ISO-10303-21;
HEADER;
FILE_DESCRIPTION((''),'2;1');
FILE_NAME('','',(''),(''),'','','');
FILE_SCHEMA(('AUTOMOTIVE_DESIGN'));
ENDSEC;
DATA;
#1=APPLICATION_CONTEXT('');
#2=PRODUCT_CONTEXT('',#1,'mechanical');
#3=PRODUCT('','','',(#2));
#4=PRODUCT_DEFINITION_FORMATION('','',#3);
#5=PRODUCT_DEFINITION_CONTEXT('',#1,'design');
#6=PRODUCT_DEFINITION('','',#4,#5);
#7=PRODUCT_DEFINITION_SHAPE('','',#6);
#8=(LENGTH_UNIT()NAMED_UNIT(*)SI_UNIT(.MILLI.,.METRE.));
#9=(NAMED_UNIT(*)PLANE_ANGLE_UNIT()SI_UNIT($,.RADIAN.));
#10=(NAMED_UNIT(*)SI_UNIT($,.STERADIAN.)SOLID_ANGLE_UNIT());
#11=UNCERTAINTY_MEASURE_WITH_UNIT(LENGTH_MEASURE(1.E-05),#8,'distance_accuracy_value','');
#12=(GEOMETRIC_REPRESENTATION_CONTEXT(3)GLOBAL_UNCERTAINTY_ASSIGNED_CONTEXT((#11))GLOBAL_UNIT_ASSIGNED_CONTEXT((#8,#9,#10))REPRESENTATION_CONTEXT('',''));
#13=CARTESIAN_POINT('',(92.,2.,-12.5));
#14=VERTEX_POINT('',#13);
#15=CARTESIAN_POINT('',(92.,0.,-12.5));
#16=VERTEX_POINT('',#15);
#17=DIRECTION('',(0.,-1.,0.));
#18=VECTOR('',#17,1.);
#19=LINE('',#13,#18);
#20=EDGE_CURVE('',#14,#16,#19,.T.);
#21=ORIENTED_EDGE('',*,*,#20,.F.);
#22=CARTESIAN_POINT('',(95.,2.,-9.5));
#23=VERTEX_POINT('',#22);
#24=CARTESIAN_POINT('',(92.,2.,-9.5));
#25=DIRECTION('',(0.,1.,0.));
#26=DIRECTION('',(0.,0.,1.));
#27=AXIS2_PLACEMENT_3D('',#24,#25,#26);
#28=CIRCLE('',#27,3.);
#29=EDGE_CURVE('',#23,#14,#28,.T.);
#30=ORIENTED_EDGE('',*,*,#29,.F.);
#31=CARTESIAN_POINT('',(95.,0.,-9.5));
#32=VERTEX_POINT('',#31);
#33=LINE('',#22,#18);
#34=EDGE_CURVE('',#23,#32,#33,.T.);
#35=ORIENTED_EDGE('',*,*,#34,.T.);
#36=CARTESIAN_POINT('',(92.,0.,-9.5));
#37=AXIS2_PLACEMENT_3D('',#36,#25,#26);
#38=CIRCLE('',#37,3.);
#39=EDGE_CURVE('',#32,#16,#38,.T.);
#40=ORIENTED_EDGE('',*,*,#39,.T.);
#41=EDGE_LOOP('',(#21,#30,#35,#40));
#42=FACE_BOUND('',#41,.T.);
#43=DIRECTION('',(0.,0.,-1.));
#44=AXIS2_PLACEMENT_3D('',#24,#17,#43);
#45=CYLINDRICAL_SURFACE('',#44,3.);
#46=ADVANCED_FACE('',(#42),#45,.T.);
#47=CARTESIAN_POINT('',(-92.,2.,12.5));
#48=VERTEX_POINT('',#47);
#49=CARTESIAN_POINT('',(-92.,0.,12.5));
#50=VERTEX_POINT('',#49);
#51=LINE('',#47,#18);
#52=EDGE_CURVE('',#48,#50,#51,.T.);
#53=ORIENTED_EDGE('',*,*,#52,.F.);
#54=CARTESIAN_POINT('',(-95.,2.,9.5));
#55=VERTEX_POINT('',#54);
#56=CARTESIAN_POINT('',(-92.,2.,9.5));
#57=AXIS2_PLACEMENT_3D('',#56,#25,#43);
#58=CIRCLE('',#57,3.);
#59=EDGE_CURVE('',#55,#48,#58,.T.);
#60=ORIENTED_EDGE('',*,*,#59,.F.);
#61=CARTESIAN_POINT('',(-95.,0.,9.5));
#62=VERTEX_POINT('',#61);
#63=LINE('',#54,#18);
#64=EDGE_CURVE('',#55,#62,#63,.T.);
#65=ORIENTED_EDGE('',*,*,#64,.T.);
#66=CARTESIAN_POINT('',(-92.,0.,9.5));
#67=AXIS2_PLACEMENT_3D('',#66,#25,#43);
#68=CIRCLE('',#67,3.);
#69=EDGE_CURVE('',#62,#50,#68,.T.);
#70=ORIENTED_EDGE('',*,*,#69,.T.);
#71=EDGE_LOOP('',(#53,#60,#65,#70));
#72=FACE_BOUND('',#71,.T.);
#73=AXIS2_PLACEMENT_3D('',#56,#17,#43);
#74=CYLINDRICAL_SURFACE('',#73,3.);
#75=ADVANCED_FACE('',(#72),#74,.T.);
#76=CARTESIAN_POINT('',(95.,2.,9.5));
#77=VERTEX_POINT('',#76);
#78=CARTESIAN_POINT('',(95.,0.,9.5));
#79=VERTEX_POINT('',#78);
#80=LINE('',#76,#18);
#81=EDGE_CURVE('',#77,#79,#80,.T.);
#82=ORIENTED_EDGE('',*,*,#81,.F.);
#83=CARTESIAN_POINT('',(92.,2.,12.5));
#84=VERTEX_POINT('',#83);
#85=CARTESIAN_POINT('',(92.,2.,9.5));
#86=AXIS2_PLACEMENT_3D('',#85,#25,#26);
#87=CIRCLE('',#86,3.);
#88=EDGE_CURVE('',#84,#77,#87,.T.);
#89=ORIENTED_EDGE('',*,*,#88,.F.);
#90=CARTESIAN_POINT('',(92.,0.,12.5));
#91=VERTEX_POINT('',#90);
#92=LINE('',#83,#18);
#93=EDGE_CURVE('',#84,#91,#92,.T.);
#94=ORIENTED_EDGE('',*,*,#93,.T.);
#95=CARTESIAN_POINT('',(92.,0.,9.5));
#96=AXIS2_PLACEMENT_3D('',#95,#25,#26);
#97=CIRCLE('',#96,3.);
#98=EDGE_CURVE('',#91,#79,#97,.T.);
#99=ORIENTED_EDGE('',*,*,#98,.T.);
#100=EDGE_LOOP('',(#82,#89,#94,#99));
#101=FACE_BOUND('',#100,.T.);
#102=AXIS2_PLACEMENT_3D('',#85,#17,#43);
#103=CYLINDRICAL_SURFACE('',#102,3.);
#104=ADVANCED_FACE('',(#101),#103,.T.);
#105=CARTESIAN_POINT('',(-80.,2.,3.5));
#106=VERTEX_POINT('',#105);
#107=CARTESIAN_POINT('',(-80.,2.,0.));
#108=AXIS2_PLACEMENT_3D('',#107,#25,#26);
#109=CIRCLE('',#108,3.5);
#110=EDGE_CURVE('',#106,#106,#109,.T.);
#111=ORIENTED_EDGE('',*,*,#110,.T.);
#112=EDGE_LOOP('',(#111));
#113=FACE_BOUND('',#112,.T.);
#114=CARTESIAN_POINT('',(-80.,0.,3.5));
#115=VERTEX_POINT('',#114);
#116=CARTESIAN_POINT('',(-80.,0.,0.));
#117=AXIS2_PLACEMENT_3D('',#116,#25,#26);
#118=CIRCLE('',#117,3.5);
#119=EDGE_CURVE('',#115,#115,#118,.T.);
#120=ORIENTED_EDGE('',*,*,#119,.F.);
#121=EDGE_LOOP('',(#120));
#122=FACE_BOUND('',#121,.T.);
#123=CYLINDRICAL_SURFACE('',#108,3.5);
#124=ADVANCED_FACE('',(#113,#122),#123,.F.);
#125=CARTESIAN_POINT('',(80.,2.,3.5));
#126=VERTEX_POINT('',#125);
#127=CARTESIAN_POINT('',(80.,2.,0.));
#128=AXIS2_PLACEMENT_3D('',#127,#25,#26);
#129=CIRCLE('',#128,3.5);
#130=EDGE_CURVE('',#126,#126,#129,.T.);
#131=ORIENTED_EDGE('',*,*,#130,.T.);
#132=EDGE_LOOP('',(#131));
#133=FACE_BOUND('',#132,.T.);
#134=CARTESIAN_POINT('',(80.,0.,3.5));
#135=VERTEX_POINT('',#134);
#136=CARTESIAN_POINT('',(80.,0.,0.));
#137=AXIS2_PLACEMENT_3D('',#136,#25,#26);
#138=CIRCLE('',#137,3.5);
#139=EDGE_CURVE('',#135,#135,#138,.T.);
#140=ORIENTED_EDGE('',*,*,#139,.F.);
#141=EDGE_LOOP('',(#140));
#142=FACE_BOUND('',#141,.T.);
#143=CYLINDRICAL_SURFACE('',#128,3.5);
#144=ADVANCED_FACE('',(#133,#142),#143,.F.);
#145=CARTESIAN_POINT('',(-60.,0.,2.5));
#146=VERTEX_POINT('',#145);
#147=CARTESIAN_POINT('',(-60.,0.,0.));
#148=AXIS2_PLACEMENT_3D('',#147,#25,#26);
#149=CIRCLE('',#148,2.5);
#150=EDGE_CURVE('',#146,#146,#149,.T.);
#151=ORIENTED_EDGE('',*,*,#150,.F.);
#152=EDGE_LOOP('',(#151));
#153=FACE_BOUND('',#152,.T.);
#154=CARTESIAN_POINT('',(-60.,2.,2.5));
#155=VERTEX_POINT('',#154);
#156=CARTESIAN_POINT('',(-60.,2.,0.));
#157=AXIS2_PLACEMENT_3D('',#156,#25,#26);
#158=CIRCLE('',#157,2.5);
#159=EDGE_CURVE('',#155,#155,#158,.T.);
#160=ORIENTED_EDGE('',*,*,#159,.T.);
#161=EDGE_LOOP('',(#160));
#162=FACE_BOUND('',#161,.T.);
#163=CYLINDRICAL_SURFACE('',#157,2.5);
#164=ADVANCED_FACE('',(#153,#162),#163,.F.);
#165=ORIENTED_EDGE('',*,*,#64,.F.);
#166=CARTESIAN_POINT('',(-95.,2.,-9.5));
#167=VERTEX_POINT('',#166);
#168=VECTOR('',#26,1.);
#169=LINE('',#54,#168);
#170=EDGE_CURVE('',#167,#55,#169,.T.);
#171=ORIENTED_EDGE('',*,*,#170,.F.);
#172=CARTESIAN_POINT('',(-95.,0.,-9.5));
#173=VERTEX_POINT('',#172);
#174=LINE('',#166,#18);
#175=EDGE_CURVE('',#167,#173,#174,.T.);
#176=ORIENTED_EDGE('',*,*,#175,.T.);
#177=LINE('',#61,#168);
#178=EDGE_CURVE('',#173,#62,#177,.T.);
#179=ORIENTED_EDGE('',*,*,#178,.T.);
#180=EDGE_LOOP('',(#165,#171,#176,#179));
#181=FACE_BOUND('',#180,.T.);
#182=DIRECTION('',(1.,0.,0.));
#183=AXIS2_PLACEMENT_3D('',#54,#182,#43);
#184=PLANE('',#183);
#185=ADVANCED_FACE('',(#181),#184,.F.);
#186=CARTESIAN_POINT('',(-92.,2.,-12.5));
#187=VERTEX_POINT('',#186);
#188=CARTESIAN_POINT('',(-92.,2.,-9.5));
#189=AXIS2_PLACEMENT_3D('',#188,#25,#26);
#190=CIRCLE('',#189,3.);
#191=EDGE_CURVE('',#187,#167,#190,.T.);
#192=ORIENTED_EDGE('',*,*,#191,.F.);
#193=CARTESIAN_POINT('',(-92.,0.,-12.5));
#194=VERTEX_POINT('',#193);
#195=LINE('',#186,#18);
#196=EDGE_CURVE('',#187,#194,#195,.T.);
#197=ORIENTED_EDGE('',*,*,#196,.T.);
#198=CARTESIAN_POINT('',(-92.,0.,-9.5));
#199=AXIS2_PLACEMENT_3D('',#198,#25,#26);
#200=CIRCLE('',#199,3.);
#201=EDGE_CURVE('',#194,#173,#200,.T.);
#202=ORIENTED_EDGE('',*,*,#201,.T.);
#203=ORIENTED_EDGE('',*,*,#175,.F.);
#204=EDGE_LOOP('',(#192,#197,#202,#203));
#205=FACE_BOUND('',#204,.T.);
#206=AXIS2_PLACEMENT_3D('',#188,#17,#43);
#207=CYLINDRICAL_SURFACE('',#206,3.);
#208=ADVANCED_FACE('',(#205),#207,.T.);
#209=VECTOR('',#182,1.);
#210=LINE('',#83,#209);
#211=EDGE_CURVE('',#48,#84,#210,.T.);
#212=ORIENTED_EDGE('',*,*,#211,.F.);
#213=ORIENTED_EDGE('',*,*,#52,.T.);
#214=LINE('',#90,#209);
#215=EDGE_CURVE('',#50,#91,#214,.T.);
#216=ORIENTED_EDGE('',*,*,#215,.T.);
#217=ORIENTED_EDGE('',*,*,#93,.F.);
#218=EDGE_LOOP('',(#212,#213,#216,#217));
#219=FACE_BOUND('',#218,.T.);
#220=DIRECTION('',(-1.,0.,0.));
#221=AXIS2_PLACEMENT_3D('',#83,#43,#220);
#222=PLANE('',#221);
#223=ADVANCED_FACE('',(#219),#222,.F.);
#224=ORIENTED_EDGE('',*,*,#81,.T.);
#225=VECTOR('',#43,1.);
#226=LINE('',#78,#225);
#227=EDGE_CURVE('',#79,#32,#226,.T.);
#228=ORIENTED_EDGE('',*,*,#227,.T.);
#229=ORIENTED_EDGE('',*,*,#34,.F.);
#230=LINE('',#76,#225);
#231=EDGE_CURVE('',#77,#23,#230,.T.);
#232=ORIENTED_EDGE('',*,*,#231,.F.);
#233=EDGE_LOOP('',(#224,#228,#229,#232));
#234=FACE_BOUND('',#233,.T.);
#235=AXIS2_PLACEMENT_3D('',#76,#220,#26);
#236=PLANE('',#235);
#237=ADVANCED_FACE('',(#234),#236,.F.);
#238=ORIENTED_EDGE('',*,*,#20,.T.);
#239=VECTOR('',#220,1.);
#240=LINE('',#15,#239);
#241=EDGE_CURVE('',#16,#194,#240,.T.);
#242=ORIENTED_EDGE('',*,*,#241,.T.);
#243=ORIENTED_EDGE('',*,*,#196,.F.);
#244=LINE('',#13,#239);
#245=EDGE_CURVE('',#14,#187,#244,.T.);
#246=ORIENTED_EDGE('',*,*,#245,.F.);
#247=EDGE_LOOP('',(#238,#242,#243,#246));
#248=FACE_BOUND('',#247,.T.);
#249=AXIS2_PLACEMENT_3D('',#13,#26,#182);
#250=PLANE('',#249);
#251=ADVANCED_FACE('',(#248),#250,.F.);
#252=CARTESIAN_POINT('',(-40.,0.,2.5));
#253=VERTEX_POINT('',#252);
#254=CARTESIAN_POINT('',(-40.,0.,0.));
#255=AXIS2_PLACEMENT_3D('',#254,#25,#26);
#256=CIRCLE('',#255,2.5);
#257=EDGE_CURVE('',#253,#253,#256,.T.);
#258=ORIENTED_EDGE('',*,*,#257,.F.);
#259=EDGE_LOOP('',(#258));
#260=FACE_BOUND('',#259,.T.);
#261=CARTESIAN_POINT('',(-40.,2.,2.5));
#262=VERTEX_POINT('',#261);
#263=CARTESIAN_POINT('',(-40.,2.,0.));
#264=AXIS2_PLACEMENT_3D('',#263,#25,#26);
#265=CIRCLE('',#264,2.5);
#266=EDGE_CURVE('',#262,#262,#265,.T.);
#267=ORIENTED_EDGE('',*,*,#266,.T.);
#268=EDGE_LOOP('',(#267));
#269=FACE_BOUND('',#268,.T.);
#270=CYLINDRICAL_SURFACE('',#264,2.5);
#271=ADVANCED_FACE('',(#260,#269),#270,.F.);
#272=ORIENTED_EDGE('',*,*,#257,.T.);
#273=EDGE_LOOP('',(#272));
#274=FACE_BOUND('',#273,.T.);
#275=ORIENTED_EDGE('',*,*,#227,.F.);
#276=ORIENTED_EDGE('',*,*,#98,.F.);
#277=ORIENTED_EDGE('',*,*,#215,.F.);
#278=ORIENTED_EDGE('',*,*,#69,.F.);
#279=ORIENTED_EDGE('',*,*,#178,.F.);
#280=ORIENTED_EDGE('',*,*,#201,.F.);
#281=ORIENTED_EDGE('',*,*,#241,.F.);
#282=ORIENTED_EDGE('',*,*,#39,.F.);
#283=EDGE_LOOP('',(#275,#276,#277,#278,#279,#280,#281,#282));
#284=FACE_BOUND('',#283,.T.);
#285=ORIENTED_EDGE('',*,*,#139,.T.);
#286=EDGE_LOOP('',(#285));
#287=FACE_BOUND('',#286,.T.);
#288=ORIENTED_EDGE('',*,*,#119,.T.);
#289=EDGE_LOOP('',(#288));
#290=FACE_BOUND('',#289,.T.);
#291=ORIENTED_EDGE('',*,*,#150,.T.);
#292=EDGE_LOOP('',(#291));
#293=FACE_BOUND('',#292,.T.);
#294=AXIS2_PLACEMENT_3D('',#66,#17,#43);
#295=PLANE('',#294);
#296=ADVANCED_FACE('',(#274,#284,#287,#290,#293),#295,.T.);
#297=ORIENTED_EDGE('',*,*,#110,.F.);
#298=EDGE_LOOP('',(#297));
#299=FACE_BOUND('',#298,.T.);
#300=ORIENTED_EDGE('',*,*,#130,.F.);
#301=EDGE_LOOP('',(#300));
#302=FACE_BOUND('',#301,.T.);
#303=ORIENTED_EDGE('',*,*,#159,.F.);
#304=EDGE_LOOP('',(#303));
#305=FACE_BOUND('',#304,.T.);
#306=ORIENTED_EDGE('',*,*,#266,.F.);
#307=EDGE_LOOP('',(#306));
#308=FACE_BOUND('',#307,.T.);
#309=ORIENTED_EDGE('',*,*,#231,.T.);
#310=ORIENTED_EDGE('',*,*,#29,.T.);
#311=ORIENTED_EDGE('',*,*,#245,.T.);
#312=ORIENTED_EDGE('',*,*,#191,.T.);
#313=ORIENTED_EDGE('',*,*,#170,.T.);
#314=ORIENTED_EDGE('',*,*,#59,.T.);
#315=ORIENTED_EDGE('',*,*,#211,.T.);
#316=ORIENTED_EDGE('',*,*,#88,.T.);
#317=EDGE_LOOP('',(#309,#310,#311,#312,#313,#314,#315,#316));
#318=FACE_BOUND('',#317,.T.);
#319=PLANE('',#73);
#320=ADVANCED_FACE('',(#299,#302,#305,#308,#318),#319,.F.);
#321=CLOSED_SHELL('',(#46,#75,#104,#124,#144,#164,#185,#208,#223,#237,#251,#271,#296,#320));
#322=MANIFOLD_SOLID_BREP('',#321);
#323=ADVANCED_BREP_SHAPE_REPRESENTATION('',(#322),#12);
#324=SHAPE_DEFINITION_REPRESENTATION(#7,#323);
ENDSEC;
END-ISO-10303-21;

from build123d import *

# Parameters (mm, degrees)
BASE_FLANGE1_DEPTH    = 2
F_5_0MM_DOWEL_HOLE1_D = 7
F_5_0MM_DOWEL_HOLE2_D = 5


# Sheet-metal steps are written as plain solids
with BuildPart() as part:
    # Sketch1 → Base-Flange1 (new body)
    with BuildSketch(Plane(origin=(0, 0, 0), x_dir=(1, 0, 0), z_dir=(0, 1, 0))):
        with BuildLine():
            Line((92, -12.5), (-92, -12.5))
            ThreePointArc((-92, -12.5), (-94.121320344, -11.621320344), (-95, -9.5))
            Line((-95, -9.5), (-95, 9.5))
            ThreePointArc((-95, 9.5), (-94.121320344, 11.621320344), (-92, 12.5))
            Line((-92, 12.5), (92, 12.5))
            ThreePointArc((92, 12.5), (94.121320344, 11.621320344), (95, 9.5))
            Line((95, 9.5), (95, -9.5))
            ThreePointArc((95, -9.5), (94.121320344, -11.621320344), (92, -12.5))
        make_face()
    extrude(amount=BASE_FLANGE1_DEPTH)

    # Ø5.0mm Dowel Hole1 (through all)
    with Locations(Plane(origin=(0, 2, 0), x_dir=(1, 0, 0), z_dir=(0, 1, 0))):
        with Locations((-80, 0), (80, 0)):
            Hole(F_5_0MM_DOWEL_HOLE1_D / 2)

    # Ø5.0mm Dowel Hole2 (through all)
    with Locations(Plane(origin=(0, 2, 0), x_dir=(1, 0, 0), z_dir=(0, 1, 0))):
        with Locations((-60, 0), (-40, 0)):
            Hole(F_5_0MM_DOWEL_HOLE2_D / 2)


solid = part.part
